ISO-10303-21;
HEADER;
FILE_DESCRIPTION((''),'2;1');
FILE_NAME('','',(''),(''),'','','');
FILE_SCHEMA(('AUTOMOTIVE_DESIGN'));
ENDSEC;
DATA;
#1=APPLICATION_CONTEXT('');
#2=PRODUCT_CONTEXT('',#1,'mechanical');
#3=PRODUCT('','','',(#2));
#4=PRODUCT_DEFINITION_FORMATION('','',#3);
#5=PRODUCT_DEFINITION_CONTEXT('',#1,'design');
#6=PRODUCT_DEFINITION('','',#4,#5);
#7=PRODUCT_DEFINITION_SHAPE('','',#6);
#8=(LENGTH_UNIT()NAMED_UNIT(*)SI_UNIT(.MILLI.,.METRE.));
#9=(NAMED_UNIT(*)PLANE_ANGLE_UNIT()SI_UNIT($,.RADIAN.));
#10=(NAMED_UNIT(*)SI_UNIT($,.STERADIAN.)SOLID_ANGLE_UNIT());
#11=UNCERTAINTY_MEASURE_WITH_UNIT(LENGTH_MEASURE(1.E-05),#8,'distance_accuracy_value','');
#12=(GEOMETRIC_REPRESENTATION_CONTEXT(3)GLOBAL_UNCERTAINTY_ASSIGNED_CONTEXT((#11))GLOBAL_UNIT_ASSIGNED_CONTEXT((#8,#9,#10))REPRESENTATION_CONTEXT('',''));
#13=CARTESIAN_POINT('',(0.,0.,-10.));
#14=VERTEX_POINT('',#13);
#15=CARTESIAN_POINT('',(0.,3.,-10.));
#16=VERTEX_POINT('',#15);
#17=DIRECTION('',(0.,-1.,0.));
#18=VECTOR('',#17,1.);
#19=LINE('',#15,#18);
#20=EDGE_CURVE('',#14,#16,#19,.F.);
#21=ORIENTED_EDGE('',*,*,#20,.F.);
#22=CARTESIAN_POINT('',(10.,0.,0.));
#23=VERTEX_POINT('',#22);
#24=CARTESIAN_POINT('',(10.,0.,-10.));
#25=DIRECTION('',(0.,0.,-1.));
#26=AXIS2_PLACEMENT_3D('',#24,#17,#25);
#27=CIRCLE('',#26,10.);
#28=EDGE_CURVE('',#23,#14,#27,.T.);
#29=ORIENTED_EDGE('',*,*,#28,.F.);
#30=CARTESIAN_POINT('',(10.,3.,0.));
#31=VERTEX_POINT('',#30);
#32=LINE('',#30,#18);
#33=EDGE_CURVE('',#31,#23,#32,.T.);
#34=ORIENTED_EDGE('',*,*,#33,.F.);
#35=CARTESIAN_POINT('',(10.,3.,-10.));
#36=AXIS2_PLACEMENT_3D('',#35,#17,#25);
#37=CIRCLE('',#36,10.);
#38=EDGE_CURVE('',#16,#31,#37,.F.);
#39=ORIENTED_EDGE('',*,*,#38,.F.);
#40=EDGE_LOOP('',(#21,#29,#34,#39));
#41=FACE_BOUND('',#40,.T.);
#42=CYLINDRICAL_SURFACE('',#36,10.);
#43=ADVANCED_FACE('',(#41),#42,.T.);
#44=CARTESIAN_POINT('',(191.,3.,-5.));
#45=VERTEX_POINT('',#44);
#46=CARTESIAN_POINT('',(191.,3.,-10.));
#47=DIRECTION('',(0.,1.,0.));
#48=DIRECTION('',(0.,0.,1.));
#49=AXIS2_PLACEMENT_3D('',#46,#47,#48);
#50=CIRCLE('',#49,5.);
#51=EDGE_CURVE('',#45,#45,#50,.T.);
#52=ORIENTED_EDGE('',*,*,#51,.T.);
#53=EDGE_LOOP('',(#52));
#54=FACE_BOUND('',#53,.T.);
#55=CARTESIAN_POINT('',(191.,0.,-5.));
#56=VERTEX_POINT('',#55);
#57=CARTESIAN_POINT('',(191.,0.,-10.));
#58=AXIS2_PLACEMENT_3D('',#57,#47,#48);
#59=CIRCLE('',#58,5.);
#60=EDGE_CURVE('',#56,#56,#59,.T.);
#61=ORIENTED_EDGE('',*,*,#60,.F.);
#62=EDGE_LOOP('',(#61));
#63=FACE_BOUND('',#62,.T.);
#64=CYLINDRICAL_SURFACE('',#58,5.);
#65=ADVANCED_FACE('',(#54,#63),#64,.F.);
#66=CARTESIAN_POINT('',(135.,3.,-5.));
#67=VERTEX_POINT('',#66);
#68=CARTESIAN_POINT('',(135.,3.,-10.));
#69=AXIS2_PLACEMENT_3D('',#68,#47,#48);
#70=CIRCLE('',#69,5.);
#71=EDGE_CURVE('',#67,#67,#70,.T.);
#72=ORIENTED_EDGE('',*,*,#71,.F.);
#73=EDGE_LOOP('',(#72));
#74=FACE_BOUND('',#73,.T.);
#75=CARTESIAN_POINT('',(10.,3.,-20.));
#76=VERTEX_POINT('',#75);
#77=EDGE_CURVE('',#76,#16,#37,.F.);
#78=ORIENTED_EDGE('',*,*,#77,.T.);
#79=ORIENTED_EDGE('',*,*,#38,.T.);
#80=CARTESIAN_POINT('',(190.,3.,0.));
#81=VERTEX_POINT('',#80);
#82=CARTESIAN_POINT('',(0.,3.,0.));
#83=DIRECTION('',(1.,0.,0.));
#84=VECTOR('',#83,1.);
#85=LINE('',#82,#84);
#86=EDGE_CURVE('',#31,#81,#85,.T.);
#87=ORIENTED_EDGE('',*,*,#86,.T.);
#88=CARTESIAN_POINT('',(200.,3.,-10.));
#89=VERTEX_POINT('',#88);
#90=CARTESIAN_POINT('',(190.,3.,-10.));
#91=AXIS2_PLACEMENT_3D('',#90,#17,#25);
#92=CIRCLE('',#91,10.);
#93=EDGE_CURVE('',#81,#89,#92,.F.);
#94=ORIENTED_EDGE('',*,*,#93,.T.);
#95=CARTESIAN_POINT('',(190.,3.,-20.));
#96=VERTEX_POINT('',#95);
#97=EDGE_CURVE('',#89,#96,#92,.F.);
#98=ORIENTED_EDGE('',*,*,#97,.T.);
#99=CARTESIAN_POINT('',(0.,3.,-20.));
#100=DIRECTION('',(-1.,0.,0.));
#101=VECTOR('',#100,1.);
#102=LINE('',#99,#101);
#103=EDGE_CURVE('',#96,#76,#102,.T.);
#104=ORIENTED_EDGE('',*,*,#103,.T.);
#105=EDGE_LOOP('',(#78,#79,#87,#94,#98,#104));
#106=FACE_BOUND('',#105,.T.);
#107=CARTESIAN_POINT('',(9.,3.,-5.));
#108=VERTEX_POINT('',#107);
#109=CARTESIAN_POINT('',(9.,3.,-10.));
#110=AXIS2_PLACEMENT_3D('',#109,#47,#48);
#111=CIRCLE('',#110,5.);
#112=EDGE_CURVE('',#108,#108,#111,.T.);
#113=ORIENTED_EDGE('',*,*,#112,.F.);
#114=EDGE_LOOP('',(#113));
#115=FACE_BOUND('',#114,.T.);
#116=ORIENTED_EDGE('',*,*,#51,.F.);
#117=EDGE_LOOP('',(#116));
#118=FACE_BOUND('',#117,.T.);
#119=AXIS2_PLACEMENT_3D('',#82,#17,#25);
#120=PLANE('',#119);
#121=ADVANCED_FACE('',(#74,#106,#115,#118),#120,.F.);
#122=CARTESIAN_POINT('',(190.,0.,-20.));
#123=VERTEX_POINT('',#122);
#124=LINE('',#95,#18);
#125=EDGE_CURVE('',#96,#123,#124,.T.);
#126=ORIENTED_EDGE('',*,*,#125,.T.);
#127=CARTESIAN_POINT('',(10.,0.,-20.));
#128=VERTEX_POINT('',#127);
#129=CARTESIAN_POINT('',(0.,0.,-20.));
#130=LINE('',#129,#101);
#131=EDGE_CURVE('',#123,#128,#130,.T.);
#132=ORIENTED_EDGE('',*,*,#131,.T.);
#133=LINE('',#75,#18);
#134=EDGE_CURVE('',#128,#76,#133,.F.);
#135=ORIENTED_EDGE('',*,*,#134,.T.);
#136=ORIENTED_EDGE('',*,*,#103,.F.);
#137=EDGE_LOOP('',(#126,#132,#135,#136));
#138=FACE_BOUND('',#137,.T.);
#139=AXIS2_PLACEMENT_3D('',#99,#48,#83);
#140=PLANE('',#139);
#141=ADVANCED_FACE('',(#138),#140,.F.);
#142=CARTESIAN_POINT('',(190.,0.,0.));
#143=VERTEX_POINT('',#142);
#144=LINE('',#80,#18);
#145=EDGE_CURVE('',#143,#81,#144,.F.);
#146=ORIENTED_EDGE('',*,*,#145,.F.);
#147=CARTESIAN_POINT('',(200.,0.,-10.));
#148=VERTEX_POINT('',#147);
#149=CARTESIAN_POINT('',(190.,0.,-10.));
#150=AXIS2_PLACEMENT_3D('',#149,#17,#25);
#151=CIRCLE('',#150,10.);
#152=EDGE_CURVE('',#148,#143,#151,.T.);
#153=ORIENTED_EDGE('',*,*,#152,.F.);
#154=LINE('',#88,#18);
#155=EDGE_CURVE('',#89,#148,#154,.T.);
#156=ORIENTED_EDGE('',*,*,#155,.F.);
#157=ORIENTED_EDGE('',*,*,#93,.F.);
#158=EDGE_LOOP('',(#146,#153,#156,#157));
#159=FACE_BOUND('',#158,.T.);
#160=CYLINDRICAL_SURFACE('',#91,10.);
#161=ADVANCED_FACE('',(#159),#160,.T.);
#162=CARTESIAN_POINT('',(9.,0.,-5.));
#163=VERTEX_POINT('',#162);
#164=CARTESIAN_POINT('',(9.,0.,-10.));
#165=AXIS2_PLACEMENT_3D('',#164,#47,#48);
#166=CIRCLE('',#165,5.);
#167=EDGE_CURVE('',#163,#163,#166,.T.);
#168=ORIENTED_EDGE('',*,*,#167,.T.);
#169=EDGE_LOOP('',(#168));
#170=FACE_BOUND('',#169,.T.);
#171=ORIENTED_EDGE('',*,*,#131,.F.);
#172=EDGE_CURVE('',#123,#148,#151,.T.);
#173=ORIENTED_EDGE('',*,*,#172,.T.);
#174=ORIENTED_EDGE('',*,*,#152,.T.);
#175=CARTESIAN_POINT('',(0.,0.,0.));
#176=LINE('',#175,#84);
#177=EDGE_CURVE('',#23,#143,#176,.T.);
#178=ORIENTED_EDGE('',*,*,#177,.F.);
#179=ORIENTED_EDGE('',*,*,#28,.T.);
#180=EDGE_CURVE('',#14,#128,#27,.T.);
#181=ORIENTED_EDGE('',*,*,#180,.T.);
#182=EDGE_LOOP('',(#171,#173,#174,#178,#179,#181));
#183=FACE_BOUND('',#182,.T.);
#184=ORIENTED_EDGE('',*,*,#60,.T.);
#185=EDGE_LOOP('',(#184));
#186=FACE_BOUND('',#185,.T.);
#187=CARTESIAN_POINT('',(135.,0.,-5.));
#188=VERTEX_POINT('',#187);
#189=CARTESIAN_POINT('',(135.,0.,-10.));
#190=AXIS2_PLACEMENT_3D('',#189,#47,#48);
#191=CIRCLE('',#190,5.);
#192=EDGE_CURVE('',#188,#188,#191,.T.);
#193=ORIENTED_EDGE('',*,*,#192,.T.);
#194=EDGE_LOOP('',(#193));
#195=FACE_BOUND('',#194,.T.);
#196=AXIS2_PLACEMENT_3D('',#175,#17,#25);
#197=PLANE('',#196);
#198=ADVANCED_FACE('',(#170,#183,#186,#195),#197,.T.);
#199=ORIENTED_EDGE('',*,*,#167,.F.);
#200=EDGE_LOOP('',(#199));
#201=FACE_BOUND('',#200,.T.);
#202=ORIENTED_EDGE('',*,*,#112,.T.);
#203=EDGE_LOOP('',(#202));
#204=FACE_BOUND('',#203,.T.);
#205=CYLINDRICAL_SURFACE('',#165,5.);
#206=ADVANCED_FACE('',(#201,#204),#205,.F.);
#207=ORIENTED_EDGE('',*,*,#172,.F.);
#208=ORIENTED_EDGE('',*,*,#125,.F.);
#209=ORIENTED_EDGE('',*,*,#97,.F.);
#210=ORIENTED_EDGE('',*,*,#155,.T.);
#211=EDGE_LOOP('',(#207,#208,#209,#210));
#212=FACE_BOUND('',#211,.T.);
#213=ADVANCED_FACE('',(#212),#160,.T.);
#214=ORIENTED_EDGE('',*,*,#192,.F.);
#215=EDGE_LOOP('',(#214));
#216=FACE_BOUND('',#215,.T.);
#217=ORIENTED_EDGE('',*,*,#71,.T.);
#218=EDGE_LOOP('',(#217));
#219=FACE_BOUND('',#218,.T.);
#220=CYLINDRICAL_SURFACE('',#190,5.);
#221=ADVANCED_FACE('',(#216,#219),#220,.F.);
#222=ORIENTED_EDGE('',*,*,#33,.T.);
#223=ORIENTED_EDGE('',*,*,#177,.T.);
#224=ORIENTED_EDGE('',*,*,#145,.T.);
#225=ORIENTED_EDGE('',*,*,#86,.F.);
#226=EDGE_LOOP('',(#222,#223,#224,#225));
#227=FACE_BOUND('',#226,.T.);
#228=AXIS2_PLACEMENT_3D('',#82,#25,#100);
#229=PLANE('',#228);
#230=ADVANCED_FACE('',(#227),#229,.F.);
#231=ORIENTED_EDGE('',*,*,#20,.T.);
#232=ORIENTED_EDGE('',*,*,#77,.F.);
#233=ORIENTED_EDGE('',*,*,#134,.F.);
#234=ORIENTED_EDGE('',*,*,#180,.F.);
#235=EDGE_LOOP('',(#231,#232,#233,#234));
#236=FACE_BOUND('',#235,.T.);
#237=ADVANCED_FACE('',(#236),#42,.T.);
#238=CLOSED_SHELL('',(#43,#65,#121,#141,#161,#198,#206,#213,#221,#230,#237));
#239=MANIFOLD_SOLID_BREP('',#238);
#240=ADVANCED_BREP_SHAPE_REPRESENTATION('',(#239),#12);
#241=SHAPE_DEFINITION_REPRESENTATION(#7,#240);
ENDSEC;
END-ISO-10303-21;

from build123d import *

# Parameters (mm, degrees)
SKETCH2_W           = 200
SKETCH2_H           = 20
BOSS_EXTRUDE1_DEPTH = 3
SKETCH3_R           = 5
CUT_EXTRUDE1_DEPTH  = 202.019899512
SKETCH4_R           = 5
CUT_EXTRUDE2_DEPTH  = 202.019899512
FILLET1_R           = 10
FILLET2_R           = 10
SKETCH5_R           = 5
CUT_EXTRUDE3_DEPTH  = 202.019899512


with BuildPart() as part:
    # Sketch2 → Boss-Extrude1 (new body)
    with BuildSketch(Plane(origin=(0, 0, 0), x_dir=(1, 0, 0), z_dir=(0, 1, 0))):
        with Locations((100, 10)):
            Rectangle(SKETCH2_W, SKETCH2_H)
    extrude(amount=BOSS_EXTRUDE1_DEPTH)

    # Sketch3 → Cut-Extrude1 (cut, through all)
    with BuildSketch(Plane(origin=(0, 3, 0), x_dir=(1, 0, 0), z_dir=(0, 1, 0))):
        with Locations(Location((9, 10, 0), (0, 0, 270))):
            Circle(SKETCH3_R)
    extrude(amount=-CUT_EXTRUDE1_DEPTH, mode=Mode.SUBTRACT)

    # Sketch4 → Cut-Extrude2 (cut, through all)
    with BuildSketch(Plane(origin=(0, 3, 0), x_dir=(1, 0, 0), z_dir=(0, 1, 0))):
        with Locations(Location((191, 10, 0), (0, 0, 270))):
            Circle(SKETCH4_R)
    extrude(amount=-CUT_EXTRUDE2_DEPTH, mode=Mode.SUBTRACT)

    # Fillet1
    fillet1_edges = [part.edges().sort_by_distance(p)[0] for p in [
        (0, 1.5, -20),
        (0, 1.5, 0),
    ]]
    fillet(fillet1_edges, radius=FILLET1_R - 0.0001)  # a hair under: the kernel refuses the full size

    # Fillet2
    fillet2_edges = [part.edges().sort_by_distance(p)[0] for p in [
        (200, 1.5, -20),
        (200, 1.5, 0),
    ]]
    fillet(fillet2_edges, radius=FILLET2_R - 0.0001)  # a hair under: the kernel refuses the full size

    # Sketch5 → Cut-Extrude3 (cut, through all)
    with BuildSketch(Plane(origin=(0, 3, 0), x_dir=(1, 0, 0), z_dir=(0, 1, 0))):
        with Locations(Location((135, 10, 0), (0, 0, 270))):
            Circle(SKETCH5_R)
    extrude(amount=-CUT_EXTRUDE3_DEPTH, mode=Mode.SUBTRACT)


solid = part.part
